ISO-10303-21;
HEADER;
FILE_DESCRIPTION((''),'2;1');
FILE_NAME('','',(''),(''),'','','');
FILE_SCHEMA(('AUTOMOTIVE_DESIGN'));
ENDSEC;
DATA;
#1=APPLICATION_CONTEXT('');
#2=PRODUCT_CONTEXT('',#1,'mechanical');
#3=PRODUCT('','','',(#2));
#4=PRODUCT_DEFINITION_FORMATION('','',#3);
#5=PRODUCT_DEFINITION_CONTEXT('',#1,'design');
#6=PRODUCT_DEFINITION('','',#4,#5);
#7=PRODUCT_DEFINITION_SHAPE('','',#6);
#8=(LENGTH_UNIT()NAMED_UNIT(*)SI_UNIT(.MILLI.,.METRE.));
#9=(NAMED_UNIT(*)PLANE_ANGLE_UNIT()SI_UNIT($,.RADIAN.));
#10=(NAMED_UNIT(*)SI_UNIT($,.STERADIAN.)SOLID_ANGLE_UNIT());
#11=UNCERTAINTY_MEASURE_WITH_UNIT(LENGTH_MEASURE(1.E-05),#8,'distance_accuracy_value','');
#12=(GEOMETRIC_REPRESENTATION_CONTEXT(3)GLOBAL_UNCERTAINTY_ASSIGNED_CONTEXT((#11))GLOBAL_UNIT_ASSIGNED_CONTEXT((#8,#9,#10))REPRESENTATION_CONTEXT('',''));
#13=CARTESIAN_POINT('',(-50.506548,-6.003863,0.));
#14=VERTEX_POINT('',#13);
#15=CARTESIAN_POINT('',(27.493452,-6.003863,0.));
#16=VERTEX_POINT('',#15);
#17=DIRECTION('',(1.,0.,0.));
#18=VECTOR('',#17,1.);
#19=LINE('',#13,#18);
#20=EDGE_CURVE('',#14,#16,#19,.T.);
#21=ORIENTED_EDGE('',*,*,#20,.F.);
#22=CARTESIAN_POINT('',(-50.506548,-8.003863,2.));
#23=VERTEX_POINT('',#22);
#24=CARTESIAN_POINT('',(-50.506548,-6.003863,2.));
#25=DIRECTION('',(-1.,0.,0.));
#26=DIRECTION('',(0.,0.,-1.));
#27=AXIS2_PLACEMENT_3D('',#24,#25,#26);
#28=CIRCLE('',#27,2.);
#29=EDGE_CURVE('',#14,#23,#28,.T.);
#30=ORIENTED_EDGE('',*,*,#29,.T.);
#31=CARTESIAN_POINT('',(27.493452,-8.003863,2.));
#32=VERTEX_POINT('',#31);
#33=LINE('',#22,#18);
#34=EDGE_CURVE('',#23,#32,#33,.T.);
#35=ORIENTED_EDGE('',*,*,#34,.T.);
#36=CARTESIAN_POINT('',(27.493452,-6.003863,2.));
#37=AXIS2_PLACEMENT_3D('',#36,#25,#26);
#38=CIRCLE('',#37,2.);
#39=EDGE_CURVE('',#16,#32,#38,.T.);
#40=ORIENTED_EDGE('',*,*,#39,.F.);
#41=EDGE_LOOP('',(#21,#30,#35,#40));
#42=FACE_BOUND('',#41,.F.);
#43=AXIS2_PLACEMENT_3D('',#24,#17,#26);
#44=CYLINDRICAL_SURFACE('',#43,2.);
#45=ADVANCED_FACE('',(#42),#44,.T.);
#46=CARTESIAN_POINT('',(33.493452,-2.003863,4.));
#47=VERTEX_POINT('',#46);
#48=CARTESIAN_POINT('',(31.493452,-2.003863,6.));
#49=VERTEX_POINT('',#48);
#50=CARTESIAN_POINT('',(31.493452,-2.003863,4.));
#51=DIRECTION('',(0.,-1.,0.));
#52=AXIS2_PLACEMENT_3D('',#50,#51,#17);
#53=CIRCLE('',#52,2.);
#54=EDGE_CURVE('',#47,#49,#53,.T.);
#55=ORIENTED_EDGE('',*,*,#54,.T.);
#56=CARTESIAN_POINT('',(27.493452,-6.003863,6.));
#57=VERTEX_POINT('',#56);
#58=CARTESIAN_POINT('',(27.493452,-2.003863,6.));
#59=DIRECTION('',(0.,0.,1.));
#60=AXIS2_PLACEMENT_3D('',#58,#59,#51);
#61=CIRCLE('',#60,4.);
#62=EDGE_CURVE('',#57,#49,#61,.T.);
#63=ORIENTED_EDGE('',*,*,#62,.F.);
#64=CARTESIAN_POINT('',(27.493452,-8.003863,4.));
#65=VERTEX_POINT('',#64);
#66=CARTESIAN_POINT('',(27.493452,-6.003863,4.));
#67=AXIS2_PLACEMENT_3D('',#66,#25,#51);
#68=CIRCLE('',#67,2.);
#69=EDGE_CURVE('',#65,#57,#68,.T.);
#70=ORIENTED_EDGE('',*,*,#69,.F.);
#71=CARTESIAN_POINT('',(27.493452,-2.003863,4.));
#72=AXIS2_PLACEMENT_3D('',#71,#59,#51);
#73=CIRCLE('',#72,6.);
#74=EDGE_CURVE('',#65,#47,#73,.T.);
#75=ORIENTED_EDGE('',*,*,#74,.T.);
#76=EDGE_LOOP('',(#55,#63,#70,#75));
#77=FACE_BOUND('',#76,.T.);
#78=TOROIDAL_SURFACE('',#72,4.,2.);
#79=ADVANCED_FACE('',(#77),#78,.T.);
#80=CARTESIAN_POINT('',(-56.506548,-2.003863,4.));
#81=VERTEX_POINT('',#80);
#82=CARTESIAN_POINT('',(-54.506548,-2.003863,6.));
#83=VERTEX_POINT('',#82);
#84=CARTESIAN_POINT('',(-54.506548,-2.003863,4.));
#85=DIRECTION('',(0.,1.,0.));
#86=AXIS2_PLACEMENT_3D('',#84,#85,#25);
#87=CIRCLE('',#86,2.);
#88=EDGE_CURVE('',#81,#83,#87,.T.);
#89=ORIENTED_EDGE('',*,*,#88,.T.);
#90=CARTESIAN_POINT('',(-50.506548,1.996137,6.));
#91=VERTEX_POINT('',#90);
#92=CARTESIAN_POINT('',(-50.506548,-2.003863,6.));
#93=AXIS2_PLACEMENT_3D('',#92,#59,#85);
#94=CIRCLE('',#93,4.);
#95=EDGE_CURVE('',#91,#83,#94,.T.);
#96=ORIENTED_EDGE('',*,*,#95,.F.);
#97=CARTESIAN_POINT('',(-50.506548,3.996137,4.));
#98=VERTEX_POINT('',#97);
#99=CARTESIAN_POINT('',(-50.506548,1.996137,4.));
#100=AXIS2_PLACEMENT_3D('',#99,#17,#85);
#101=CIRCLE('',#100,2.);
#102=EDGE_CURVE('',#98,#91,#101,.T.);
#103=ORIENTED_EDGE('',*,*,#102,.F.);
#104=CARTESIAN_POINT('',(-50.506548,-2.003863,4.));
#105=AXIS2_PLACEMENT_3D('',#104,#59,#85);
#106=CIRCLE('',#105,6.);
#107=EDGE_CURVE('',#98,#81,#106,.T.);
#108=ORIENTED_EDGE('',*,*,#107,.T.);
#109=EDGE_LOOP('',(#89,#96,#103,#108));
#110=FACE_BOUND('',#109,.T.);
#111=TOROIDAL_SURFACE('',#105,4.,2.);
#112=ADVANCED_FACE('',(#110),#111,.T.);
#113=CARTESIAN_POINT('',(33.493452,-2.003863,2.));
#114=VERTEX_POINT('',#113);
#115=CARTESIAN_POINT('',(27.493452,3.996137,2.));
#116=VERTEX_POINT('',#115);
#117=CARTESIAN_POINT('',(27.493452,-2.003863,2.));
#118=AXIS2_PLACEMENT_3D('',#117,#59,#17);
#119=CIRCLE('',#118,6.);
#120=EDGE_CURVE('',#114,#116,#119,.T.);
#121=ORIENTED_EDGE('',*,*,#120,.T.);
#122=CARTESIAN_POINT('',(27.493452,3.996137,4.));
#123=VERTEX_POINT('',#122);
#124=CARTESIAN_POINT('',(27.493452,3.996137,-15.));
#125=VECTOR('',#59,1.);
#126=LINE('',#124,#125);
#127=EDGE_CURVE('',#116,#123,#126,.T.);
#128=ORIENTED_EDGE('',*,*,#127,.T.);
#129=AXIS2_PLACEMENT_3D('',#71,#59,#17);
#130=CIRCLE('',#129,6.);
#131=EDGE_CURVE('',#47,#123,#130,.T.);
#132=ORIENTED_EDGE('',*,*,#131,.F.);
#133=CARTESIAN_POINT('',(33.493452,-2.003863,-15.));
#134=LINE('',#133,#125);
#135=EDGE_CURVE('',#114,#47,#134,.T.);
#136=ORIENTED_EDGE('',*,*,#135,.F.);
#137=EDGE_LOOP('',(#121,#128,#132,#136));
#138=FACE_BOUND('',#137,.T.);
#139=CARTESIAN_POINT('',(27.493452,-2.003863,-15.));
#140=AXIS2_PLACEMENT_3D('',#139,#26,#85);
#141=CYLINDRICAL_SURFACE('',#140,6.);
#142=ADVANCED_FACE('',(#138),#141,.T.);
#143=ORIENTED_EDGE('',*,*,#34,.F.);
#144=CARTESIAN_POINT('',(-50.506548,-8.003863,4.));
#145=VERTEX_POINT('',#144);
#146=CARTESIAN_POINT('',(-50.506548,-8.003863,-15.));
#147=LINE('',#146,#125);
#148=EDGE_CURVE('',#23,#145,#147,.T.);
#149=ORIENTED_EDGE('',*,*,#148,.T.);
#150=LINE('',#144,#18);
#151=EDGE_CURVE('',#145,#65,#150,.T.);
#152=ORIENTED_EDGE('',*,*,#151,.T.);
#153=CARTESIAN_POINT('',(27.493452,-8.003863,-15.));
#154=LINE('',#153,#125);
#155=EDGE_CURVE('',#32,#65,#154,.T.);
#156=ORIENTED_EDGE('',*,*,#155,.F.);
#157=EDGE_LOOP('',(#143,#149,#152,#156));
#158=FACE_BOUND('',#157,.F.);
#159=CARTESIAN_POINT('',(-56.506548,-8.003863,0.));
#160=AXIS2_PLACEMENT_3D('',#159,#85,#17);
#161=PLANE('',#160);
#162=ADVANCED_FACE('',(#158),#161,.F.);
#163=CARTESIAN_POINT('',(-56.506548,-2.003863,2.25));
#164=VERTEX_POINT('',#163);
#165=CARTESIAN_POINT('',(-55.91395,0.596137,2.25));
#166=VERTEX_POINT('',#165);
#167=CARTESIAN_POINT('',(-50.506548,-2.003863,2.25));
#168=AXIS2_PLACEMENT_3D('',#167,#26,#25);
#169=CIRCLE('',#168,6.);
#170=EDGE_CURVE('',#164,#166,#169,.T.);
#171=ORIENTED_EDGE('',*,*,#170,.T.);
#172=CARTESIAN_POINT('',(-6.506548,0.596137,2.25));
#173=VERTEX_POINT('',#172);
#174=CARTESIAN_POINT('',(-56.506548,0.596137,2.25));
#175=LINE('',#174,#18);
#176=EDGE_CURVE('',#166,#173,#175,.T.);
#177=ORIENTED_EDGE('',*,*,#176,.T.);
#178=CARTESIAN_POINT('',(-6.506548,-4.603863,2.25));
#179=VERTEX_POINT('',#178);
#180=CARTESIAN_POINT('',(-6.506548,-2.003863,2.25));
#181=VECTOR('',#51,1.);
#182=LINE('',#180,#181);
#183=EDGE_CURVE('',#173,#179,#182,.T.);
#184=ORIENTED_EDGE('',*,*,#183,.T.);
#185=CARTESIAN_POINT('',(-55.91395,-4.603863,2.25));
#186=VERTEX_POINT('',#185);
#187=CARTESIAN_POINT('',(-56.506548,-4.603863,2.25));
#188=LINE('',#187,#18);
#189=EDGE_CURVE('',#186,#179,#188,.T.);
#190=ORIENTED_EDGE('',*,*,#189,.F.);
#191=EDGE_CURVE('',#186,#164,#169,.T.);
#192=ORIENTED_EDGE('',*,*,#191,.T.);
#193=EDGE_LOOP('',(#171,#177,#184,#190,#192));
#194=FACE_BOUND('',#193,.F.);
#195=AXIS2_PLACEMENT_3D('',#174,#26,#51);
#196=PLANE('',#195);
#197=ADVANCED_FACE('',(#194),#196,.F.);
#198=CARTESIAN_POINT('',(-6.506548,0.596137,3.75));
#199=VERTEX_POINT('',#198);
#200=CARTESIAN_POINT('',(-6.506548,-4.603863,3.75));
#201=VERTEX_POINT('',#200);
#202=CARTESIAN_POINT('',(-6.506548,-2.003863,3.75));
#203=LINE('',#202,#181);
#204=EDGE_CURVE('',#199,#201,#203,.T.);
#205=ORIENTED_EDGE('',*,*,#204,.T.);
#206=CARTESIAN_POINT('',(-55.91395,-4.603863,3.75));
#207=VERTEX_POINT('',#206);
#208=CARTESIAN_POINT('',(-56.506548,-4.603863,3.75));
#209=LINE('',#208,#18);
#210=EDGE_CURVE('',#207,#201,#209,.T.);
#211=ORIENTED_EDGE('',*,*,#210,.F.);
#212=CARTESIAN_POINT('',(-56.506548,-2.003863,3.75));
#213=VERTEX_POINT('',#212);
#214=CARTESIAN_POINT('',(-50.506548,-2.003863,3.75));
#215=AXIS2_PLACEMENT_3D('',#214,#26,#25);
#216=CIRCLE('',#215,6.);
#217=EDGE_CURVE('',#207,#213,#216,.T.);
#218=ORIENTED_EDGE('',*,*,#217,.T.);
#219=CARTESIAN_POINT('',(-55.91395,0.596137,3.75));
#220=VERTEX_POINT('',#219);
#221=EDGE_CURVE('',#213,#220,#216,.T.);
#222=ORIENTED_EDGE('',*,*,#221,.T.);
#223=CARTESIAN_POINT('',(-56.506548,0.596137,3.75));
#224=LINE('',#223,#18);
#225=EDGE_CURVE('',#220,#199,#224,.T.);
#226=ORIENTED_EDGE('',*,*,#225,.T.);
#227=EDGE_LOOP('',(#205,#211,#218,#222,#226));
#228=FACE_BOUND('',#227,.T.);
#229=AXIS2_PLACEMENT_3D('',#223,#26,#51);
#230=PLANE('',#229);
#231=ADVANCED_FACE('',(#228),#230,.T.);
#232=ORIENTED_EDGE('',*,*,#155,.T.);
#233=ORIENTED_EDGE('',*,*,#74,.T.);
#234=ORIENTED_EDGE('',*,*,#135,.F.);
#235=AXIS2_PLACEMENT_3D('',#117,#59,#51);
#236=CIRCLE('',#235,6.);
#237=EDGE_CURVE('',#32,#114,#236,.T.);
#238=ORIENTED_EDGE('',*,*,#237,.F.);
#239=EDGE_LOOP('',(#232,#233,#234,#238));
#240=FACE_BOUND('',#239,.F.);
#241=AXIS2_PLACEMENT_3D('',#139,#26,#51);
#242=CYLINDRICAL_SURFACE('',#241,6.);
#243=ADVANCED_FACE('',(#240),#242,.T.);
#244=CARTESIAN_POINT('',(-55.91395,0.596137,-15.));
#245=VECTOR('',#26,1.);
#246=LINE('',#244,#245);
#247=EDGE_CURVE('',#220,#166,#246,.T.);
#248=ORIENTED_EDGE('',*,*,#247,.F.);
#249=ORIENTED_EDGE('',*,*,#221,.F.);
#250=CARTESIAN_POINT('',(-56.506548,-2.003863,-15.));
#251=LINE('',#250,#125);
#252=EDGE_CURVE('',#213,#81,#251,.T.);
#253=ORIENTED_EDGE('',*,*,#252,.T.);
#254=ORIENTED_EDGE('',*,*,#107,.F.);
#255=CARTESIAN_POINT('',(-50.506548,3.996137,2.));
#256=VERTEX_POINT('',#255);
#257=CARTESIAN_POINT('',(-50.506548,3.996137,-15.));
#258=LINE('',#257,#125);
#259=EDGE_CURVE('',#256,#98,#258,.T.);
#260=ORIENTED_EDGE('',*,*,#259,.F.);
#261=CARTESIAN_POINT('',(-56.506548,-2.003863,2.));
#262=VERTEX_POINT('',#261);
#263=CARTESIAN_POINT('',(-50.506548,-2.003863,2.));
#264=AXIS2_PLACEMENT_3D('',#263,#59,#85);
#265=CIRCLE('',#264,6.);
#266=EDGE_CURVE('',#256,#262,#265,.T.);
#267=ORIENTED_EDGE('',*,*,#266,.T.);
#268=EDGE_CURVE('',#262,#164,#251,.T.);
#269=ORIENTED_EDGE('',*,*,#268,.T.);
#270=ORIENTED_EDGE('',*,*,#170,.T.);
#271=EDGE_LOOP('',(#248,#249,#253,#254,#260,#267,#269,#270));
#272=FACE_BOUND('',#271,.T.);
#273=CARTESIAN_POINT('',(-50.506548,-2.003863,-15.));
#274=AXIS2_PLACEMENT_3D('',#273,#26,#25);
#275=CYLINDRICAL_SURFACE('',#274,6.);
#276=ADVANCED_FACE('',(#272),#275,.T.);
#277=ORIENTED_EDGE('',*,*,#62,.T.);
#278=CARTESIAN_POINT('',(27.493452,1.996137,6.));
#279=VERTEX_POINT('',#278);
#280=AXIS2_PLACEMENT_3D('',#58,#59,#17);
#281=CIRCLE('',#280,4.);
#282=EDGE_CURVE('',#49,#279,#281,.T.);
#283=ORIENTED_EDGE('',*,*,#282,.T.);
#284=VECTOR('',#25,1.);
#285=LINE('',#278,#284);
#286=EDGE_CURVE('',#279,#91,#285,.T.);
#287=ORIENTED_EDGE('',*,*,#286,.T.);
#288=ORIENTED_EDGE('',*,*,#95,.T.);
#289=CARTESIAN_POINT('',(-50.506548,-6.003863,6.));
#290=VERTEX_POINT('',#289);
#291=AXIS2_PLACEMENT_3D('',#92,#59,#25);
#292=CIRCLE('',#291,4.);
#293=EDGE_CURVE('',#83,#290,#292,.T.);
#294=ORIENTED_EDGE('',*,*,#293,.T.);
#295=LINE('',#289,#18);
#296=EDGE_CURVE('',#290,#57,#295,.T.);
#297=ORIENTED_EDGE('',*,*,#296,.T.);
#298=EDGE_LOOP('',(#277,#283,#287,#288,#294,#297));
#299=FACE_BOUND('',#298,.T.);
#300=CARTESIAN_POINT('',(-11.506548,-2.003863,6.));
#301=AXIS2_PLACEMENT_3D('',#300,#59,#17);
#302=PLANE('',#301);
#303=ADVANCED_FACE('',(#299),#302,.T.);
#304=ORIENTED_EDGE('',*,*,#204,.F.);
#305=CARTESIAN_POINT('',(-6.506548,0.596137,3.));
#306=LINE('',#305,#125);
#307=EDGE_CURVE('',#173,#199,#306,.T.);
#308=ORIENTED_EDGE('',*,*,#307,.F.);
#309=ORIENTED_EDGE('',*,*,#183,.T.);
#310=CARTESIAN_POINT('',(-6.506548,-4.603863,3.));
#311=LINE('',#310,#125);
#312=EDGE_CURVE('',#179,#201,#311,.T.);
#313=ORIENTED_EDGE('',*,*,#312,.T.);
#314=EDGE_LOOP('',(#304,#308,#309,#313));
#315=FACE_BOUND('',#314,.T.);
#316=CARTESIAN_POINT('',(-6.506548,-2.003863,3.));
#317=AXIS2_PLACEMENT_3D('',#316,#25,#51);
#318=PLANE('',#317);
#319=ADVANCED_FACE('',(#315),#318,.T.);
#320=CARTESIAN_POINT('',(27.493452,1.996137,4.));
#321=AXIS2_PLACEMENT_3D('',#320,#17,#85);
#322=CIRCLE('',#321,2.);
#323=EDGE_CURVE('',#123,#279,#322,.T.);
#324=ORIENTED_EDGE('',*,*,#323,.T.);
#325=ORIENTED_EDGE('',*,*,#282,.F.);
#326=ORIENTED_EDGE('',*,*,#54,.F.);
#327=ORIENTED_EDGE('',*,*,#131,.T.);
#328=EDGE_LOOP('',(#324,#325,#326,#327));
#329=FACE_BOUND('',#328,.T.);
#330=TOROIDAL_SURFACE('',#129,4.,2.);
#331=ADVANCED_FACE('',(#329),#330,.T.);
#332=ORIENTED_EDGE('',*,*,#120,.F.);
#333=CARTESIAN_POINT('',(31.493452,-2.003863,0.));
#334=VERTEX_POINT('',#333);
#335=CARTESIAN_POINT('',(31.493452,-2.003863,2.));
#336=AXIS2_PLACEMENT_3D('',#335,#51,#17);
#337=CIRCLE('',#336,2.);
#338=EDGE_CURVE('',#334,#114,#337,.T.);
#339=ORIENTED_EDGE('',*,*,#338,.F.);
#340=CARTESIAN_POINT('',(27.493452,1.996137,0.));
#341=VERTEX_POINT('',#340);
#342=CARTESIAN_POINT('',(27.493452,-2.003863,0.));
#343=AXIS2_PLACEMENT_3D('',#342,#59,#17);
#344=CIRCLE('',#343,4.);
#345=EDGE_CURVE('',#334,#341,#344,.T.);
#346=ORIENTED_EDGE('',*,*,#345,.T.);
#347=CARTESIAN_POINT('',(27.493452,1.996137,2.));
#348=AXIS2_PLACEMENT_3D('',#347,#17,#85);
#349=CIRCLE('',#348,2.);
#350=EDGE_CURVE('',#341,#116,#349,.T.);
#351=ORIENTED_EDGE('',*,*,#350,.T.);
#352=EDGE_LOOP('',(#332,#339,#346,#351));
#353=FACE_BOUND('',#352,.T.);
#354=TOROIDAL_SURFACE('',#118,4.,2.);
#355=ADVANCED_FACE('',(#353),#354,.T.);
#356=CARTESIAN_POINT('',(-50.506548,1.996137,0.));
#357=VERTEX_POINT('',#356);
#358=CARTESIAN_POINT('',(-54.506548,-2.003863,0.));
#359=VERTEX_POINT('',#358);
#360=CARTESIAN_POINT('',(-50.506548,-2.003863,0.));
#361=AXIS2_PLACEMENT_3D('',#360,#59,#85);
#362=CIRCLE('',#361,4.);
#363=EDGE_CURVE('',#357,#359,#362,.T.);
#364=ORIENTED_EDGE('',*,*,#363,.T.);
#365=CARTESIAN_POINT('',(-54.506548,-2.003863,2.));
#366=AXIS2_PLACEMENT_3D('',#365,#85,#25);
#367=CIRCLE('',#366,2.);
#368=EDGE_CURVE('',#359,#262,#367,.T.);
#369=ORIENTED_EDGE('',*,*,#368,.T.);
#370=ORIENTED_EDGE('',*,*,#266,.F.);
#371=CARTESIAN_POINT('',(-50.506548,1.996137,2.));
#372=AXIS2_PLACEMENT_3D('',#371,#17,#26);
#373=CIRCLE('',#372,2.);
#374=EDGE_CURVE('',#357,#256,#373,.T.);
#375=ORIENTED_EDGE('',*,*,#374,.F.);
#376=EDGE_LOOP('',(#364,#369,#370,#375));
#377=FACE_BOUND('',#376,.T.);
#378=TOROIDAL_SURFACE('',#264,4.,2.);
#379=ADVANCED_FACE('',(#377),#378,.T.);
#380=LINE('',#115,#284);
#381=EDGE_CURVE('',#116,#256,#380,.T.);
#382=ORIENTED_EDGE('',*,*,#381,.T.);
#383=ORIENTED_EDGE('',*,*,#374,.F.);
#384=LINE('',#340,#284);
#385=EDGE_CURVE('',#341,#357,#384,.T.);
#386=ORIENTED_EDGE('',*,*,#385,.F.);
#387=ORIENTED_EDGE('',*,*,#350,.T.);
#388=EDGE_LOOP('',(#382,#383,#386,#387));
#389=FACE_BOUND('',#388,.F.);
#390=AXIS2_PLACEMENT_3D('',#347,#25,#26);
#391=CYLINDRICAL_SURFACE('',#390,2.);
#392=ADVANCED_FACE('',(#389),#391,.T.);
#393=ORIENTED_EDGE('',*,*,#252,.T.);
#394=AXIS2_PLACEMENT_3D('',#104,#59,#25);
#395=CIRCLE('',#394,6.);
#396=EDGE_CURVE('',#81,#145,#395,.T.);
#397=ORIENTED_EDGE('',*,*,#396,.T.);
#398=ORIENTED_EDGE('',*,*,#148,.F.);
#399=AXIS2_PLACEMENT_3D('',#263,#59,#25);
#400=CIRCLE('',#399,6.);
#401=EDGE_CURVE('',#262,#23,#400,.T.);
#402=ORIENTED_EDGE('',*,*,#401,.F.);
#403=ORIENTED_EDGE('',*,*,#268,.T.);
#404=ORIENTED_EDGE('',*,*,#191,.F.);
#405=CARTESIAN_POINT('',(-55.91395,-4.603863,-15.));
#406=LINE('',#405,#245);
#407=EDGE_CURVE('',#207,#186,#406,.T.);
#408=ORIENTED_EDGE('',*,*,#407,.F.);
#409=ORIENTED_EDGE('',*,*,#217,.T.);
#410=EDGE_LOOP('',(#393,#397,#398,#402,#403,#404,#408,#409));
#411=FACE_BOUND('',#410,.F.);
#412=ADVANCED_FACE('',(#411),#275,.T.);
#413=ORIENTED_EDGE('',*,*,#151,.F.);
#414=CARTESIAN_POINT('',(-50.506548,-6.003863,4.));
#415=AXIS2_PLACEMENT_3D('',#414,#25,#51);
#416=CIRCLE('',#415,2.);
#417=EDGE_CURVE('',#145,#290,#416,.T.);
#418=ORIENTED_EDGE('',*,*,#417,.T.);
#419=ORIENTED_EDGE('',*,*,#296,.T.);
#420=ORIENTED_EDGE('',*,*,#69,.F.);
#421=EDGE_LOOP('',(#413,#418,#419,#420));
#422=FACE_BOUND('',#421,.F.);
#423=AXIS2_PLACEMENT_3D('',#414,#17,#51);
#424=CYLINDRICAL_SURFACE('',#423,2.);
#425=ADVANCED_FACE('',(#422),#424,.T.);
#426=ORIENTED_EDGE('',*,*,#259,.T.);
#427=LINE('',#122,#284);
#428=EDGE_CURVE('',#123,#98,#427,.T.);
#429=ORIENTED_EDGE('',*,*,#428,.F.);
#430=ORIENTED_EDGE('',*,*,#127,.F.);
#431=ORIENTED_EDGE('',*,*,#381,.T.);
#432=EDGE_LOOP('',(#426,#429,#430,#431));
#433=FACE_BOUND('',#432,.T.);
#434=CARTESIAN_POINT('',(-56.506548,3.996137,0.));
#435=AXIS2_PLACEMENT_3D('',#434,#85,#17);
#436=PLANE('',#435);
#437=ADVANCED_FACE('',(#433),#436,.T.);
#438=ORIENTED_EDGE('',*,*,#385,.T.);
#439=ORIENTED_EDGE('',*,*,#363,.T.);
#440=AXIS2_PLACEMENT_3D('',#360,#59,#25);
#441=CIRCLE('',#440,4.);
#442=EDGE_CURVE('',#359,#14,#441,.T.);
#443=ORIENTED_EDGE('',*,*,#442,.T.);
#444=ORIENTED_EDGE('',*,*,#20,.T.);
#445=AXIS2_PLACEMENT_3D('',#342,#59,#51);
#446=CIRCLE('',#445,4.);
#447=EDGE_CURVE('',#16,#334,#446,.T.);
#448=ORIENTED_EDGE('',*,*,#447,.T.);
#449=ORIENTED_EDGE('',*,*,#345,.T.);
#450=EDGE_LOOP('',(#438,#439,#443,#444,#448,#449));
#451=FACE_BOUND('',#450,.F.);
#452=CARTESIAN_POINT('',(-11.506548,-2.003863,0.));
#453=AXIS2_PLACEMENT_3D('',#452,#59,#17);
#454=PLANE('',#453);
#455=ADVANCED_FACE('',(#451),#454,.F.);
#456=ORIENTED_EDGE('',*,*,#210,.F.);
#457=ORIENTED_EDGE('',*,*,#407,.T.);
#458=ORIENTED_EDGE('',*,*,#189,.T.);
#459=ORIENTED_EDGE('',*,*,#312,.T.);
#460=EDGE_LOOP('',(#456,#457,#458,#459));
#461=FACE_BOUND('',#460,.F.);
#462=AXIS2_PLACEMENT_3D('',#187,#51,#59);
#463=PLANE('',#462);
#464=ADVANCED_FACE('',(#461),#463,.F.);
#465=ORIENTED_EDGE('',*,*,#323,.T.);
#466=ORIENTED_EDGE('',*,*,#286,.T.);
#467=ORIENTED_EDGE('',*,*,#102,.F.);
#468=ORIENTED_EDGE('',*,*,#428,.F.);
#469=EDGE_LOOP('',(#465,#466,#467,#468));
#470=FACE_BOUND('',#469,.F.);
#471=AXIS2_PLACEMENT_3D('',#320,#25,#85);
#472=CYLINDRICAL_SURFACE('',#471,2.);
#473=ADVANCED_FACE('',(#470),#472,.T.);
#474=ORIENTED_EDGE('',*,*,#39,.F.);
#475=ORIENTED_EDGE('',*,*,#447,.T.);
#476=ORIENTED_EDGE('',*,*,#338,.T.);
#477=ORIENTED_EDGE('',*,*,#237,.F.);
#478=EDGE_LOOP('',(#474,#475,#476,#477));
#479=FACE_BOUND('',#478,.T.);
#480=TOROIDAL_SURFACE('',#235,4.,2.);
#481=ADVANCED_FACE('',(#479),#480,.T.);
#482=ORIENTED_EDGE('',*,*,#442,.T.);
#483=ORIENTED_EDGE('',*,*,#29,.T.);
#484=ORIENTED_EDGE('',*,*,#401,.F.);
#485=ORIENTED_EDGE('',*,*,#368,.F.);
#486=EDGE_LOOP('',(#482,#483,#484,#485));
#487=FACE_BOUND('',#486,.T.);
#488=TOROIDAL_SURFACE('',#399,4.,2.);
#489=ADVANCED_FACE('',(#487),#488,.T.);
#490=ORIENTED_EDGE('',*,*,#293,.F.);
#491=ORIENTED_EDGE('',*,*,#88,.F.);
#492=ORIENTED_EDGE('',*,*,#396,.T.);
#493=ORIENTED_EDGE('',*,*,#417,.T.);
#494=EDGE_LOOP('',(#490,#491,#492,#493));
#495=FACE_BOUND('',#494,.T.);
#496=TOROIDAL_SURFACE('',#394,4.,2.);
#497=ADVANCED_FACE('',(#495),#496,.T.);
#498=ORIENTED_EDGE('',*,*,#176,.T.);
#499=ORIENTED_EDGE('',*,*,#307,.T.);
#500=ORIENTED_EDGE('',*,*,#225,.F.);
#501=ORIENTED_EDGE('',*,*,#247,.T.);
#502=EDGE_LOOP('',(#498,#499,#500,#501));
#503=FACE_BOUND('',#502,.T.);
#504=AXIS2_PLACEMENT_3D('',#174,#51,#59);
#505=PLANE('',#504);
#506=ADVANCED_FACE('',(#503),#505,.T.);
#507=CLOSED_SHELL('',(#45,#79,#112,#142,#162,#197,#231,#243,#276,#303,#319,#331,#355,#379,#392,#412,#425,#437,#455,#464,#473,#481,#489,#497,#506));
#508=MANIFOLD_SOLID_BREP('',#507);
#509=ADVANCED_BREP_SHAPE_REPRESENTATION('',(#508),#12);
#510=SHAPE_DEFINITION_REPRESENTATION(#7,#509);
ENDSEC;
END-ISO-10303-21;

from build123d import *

# Parameters (mm, degrees)
F0_W        = 90
F0_H        = 12
F1_DEPTH    = 6
F2_W        = 5.2
F2_H        = 1.5
F3_DEPTH    = 50
F4_T1_DEPTH = 36
F5_R        = 2


# Not quite as in the source:
# - a fillet or chamfer that OpenCascade refuses, or shapes differently, is made with other operations: its cross-section is extruded or revolved along the edge and cut away or added


with BuildPart() as f1:
    # F0 (on Top) → F1 (new body)
    with BuildSketch(Plane.XY):
        with Locations((-11.5065481514, -2.003862651)):
            Rectangle(F0_W, F0_H)
    extrude(amount=F1_DEPTH)

    # F2 (on face) → F3 (cut)
    with BuildSketch(Plane(origin=(-56.5065481514, 0, 0), x_dir=(0, -1, 0), z_dir=(-1, 0, 0))):
        with Locations((2.003862651, 3)):
            Rectangle(F2_W, F2_H)
    extrude(amount=-F3_DEPTH, mode=Mode.SUBTRACT)

    # F4: fillet of radius 6 on 4 edges, made by hand

    # F4_s2 → F4_t1 (cut)
    with BuildSketch(Plane.XY.offset(-15)):
        with BuildLine():
            ThreePointArc((-56.5065481514, -2.003862651), (-54.7491888385, -6.2465033381), (-50.5065481514, -8.003862651))
            Line((-50.5065481514, -8.003862651), (-56.5065481514, -8.003862651))
            Line((-56.5065481514, -8.003862651), (-56.5065481514, -2.003862651))
        make_face()
        with BuildLine():
            ThreePointArc((-56.5065481514, -2.003862651), (-54.7491888385, 2.2387780361), (-50.5065481514, 3.996137349))
            Line((-50.5065481514, 3.996137349), (-56.5065481514, 3.996137349))
            Line((-56.5065481514, 3.996137349), (-56.5065481514, -2.003862651))
        make_face()
        with BuildLine():
            ThreePointArc((27.4934518486, -8.003862651), (31.7360925357, -6.2465033381), (33.4934518486, -2.003862651))
            Line((33.4934518486, -2.003862651), (33.4934518486, -8.003862651))
            Line((33.4934518486, -8.003862651), (27.4934518486, -8.003862651))
        make_face()
        with BuildLine():
            ThreePointArc((27.4934518486, 3.996137349), (31.7360925357, 2.2387780361), (33.4934518486, -2.003862651))
            Line((33.4934518486, -2.003862651), (33.4934518486, 3.996137349))
            Line((33.4934518486, 3.996137349), (27.4934518486, 3.996137349))
        make_face()
    extrude(amount=F4_T1_DEPTH, mode=Mode.SUBTRACT)

    # F5
    f5_edges = [f1.edges().sort_by_distance(p)[0] for p in [
        (-11.506548, -8.003863, 6),
        (-11.506548, -8.003863, 0),
    ]]
    fillet(f5_edges, radius=F5_R)


solid = f1.part
